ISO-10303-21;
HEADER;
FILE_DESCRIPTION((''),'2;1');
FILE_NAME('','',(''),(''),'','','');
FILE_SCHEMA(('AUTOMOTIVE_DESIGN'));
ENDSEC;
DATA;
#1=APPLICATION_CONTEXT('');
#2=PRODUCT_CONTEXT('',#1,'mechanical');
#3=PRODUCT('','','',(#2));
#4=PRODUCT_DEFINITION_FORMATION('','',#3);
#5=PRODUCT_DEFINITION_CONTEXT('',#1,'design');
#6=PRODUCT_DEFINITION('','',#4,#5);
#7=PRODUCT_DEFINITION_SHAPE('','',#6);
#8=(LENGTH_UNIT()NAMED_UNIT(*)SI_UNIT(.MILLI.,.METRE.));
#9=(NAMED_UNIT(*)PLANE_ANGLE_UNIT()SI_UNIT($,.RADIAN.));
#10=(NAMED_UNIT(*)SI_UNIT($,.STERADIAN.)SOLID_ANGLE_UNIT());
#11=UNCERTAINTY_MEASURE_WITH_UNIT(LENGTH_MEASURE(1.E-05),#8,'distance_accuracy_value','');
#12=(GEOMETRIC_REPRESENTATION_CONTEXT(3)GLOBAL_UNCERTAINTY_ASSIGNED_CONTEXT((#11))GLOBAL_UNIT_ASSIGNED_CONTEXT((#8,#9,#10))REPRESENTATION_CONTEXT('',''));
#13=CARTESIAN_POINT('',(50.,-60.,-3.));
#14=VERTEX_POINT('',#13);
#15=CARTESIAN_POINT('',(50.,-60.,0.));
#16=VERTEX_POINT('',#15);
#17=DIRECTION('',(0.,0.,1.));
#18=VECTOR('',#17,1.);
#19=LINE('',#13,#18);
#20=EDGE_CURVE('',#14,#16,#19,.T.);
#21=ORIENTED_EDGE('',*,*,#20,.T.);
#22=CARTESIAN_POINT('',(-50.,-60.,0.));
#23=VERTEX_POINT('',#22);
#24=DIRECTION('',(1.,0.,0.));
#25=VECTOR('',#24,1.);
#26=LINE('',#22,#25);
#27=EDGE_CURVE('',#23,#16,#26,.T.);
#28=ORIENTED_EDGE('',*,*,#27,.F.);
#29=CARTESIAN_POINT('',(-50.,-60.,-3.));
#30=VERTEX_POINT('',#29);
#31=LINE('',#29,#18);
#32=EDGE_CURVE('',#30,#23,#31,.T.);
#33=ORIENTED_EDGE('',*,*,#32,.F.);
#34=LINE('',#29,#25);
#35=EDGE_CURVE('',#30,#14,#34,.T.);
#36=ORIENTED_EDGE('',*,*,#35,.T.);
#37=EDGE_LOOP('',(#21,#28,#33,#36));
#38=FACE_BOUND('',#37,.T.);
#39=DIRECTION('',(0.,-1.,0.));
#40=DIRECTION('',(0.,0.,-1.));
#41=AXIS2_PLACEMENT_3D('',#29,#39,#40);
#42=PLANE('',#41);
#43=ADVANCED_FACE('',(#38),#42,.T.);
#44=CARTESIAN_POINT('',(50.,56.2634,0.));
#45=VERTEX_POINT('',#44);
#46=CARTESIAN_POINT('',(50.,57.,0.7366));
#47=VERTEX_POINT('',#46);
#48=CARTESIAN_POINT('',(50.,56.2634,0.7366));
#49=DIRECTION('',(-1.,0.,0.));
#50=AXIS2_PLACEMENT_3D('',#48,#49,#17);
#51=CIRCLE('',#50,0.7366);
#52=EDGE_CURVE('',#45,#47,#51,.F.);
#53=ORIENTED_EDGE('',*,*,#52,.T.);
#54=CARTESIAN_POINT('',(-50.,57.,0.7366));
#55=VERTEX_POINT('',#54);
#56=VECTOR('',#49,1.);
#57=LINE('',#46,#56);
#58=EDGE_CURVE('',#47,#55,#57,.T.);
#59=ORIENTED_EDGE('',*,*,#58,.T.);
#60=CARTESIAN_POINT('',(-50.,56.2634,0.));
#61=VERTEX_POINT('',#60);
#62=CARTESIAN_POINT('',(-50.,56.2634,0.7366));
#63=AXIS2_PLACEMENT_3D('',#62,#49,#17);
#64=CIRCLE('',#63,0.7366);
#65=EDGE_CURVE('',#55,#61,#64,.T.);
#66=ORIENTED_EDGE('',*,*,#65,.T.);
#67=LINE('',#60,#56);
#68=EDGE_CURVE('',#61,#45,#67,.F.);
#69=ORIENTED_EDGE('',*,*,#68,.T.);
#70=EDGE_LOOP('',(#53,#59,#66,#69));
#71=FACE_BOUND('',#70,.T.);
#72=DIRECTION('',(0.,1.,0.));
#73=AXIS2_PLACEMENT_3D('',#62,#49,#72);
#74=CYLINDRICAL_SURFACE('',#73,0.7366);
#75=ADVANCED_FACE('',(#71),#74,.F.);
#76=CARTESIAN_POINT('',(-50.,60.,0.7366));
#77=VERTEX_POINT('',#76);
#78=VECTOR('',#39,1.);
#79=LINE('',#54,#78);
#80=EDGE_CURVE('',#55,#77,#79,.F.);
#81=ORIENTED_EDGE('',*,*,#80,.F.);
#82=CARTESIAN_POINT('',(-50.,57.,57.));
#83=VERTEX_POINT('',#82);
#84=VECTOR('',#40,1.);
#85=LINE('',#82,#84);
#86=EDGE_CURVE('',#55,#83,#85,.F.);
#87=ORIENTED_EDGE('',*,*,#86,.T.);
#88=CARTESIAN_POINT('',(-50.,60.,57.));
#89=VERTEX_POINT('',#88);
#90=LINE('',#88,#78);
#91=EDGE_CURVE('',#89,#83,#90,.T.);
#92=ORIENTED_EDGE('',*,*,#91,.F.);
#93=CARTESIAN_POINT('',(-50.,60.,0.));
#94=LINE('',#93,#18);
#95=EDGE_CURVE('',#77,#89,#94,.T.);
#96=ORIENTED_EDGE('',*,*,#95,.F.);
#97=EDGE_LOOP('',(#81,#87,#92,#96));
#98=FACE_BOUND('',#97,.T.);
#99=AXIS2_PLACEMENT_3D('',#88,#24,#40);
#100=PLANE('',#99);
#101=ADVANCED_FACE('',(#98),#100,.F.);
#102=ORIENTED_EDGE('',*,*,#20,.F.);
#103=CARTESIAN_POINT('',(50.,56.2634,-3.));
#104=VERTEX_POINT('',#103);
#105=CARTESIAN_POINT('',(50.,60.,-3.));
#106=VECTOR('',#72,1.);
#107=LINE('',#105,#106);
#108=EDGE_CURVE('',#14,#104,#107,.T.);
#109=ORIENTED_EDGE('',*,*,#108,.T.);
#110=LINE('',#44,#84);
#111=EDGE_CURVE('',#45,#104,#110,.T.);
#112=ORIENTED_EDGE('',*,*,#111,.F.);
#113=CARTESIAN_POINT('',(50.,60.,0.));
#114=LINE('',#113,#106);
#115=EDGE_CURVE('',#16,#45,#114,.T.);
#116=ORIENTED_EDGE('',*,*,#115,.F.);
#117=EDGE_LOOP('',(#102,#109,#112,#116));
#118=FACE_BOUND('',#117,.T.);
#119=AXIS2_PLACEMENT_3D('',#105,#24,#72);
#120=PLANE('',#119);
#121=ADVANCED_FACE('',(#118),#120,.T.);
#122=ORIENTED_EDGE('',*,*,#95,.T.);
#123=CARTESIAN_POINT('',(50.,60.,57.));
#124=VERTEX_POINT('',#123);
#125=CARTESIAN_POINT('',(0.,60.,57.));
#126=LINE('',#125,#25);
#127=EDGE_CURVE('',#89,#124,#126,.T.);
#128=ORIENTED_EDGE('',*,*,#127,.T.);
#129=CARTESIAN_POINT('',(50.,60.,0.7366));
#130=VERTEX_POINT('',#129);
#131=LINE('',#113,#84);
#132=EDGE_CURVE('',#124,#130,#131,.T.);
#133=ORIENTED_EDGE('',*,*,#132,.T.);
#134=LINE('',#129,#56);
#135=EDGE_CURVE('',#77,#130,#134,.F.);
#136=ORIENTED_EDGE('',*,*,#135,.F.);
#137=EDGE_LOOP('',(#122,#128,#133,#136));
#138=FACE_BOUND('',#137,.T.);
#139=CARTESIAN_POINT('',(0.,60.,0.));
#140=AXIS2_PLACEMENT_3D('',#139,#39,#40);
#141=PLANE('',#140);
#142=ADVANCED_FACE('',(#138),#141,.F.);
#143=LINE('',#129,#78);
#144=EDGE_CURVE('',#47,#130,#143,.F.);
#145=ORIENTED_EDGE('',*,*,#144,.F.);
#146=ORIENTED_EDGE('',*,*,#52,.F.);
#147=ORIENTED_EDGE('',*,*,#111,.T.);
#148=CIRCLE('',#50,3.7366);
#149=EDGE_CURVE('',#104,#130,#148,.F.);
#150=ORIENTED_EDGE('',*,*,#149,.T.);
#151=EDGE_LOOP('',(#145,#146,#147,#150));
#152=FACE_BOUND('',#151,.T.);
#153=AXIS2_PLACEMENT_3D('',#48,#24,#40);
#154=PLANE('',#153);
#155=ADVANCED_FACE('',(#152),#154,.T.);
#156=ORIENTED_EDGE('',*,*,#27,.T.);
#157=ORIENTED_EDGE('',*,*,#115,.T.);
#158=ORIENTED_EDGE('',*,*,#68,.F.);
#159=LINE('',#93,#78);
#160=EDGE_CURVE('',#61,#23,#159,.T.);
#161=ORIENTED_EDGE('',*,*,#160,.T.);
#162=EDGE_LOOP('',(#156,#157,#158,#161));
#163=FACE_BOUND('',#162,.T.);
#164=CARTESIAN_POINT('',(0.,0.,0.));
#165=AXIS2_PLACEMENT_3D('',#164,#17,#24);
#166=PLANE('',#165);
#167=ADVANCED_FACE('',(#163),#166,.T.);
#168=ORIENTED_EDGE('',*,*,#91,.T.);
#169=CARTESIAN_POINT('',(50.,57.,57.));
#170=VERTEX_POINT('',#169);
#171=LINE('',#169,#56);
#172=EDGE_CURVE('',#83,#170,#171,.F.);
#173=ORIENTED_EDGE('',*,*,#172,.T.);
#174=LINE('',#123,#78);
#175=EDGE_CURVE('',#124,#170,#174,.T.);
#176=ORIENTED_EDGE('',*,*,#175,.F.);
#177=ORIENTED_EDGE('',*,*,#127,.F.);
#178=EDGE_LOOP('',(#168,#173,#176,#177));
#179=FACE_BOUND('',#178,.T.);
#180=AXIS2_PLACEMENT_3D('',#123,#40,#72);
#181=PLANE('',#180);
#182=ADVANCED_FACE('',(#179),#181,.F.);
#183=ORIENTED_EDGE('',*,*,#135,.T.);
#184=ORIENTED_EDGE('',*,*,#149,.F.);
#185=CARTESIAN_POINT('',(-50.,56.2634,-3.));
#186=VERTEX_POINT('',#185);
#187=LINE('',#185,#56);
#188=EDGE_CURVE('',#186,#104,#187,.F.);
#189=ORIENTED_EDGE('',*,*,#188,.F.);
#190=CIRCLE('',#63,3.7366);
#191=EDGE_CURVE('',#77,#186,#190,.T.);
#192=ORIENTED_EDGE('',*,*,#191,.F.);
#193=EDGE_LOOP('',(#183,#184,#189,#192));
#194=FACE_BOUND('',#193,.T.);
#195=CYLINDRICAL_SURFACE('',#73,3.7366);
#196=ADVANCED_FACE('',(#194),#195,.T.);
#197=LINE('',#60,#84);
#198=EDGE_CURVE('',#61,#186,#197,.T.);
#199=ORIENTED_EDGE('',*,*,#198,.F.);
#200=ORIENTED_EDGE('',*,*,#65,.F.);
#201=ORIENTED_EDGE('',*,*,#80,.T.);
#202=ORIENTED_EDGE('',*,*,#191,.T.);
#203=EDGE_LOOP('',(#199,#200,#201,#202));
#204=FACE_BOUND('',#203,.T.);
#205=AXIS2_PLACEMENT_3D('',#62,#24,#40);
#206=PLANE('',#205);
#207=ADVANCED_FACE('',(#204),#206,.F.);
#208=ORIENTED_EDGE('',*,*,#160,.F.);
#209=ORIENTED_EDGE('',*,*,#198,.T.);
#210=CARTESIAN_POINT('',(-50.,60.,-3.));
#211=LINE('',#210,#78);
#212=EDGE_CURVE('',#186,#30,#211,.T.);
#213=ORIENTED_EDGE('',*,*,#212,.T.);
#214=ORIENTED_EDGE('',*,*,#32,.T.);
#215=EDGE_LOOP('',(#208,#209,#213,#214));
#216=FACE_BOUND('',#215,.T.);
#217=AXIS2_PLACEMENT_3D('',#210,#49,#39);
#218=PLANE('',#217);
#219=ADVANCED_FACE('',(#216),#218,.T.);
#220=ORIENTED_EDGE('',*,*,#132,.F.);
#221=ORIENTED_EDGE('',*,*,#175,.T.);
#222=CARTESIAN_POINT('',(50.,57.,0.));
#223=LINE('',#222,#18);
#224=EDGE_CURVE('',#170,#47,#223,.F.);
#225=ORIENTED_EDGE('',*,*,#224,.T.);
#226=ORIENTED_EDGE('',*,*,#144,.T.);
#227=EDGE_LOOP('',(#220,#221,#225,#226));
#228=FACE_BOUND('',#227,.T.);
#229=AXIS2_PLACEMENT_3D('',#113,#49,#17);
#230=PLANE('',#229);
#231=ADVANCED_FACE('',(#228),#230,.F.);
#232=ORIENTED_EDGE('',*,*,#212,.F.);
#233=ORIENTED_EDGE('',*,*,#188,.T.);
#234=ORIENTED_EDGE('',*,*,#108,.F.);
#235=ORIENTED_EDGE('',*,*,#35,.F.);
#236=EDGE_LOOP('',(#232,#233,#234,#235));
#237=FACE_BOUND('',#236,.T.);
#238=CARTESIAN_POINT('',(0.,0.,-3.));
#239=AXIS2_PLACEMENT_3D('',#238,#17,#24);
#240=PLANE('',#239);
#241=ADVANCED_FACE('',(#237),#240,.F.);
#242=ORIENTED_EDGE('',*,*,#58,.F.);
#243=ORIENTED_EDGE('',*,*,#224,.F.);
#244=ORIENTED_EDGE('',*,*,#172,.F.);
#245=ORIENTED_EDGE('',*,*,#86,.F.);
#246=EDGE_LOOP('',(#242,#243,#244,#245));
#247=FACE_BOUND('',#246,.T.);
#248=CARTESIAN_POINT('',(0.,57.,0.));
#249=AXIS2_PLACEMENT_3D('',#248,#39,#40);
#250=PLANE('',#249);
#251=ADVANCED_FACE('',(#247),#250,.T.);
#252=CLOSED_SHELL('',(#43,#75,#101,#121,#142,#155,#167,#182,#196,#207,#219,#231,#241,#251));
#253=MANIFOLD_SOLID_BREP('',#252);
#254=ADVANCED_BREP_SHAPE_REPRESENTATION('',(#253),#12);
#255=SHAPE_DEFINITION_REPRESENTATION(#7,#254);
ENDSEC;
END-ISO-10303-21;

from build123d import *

# Parameters (mm, degrees)
SKETCH_1_W                       = 100
SKETCH_1_H                       = 120
SM_BASE_FLANGE_1_DEPTH           = 3
SM_EDGE_FLANGE_1_STRIP_W         = 13.4732
SM_EDGE_FLANGE_1_STRIP_H         = 3
SM_EDGE_FLANGE_1_STRIP_CUT_DEPTH = 100
SM_EDGE_FLANGE_1_DEPTH           = 100


# Sheet-metal steps are written as plain solids
with BuildPart() as part:
    # Sketch 1 → 基体-法兰1 (new body)
    with BuildSketch(Plane.XY):
        Rectangle(SKETCH_1_W, SKETCH_1_H)
    extrude(amount=-SM_BASE_FLANGE_1_DEPTH)

    # 边线-法兰1 strip (across the edge) → 边线-法兰1 strip cut (cut)
    with BuildSketch(Plane(origin=(50, 60, 0), x_dir=(0, -1, 0), z_dir=(-1, 0, 0))):
        with Locations((-3, -1.5)):
            Rectangle(SM_EDGE_FLANGE_1_STRIP_W, SM_EDGE_FLANGE_1_STRIP_H)
    extrude(amount=SM_EDGE_FLANGE_1_STRIP_CUT_DEPTH, mode=Mode.SUBTRACT)

    # 边线-法兰1 section (across the edge) → 边线-法兰1 (add)
    with BuildSketch(Plane(origin=(50, 60, 0), x_dir=(0, -1, 0), z_dir=(-1, 0, 0))):
        with BuildLine():
            Line((0, 0.7366), (0, 57))
            Line((0, 57), (3, 57))
            Line((3, 57), (3, 0.7366))
            ThreePointArc((3, 0.7366), (3.215745145, 0.215745145), (3.7366, 0))
            Line((3.7366, 0), (3.7366, -3))
            ThreePointArc((3.7366, -3), (1.094424801, -1.905575199), (0, 0.7366))
        make_face()
    extrude(amount=SM_EDGE_FLANGE_1_DEPTH)


solid = part.part
